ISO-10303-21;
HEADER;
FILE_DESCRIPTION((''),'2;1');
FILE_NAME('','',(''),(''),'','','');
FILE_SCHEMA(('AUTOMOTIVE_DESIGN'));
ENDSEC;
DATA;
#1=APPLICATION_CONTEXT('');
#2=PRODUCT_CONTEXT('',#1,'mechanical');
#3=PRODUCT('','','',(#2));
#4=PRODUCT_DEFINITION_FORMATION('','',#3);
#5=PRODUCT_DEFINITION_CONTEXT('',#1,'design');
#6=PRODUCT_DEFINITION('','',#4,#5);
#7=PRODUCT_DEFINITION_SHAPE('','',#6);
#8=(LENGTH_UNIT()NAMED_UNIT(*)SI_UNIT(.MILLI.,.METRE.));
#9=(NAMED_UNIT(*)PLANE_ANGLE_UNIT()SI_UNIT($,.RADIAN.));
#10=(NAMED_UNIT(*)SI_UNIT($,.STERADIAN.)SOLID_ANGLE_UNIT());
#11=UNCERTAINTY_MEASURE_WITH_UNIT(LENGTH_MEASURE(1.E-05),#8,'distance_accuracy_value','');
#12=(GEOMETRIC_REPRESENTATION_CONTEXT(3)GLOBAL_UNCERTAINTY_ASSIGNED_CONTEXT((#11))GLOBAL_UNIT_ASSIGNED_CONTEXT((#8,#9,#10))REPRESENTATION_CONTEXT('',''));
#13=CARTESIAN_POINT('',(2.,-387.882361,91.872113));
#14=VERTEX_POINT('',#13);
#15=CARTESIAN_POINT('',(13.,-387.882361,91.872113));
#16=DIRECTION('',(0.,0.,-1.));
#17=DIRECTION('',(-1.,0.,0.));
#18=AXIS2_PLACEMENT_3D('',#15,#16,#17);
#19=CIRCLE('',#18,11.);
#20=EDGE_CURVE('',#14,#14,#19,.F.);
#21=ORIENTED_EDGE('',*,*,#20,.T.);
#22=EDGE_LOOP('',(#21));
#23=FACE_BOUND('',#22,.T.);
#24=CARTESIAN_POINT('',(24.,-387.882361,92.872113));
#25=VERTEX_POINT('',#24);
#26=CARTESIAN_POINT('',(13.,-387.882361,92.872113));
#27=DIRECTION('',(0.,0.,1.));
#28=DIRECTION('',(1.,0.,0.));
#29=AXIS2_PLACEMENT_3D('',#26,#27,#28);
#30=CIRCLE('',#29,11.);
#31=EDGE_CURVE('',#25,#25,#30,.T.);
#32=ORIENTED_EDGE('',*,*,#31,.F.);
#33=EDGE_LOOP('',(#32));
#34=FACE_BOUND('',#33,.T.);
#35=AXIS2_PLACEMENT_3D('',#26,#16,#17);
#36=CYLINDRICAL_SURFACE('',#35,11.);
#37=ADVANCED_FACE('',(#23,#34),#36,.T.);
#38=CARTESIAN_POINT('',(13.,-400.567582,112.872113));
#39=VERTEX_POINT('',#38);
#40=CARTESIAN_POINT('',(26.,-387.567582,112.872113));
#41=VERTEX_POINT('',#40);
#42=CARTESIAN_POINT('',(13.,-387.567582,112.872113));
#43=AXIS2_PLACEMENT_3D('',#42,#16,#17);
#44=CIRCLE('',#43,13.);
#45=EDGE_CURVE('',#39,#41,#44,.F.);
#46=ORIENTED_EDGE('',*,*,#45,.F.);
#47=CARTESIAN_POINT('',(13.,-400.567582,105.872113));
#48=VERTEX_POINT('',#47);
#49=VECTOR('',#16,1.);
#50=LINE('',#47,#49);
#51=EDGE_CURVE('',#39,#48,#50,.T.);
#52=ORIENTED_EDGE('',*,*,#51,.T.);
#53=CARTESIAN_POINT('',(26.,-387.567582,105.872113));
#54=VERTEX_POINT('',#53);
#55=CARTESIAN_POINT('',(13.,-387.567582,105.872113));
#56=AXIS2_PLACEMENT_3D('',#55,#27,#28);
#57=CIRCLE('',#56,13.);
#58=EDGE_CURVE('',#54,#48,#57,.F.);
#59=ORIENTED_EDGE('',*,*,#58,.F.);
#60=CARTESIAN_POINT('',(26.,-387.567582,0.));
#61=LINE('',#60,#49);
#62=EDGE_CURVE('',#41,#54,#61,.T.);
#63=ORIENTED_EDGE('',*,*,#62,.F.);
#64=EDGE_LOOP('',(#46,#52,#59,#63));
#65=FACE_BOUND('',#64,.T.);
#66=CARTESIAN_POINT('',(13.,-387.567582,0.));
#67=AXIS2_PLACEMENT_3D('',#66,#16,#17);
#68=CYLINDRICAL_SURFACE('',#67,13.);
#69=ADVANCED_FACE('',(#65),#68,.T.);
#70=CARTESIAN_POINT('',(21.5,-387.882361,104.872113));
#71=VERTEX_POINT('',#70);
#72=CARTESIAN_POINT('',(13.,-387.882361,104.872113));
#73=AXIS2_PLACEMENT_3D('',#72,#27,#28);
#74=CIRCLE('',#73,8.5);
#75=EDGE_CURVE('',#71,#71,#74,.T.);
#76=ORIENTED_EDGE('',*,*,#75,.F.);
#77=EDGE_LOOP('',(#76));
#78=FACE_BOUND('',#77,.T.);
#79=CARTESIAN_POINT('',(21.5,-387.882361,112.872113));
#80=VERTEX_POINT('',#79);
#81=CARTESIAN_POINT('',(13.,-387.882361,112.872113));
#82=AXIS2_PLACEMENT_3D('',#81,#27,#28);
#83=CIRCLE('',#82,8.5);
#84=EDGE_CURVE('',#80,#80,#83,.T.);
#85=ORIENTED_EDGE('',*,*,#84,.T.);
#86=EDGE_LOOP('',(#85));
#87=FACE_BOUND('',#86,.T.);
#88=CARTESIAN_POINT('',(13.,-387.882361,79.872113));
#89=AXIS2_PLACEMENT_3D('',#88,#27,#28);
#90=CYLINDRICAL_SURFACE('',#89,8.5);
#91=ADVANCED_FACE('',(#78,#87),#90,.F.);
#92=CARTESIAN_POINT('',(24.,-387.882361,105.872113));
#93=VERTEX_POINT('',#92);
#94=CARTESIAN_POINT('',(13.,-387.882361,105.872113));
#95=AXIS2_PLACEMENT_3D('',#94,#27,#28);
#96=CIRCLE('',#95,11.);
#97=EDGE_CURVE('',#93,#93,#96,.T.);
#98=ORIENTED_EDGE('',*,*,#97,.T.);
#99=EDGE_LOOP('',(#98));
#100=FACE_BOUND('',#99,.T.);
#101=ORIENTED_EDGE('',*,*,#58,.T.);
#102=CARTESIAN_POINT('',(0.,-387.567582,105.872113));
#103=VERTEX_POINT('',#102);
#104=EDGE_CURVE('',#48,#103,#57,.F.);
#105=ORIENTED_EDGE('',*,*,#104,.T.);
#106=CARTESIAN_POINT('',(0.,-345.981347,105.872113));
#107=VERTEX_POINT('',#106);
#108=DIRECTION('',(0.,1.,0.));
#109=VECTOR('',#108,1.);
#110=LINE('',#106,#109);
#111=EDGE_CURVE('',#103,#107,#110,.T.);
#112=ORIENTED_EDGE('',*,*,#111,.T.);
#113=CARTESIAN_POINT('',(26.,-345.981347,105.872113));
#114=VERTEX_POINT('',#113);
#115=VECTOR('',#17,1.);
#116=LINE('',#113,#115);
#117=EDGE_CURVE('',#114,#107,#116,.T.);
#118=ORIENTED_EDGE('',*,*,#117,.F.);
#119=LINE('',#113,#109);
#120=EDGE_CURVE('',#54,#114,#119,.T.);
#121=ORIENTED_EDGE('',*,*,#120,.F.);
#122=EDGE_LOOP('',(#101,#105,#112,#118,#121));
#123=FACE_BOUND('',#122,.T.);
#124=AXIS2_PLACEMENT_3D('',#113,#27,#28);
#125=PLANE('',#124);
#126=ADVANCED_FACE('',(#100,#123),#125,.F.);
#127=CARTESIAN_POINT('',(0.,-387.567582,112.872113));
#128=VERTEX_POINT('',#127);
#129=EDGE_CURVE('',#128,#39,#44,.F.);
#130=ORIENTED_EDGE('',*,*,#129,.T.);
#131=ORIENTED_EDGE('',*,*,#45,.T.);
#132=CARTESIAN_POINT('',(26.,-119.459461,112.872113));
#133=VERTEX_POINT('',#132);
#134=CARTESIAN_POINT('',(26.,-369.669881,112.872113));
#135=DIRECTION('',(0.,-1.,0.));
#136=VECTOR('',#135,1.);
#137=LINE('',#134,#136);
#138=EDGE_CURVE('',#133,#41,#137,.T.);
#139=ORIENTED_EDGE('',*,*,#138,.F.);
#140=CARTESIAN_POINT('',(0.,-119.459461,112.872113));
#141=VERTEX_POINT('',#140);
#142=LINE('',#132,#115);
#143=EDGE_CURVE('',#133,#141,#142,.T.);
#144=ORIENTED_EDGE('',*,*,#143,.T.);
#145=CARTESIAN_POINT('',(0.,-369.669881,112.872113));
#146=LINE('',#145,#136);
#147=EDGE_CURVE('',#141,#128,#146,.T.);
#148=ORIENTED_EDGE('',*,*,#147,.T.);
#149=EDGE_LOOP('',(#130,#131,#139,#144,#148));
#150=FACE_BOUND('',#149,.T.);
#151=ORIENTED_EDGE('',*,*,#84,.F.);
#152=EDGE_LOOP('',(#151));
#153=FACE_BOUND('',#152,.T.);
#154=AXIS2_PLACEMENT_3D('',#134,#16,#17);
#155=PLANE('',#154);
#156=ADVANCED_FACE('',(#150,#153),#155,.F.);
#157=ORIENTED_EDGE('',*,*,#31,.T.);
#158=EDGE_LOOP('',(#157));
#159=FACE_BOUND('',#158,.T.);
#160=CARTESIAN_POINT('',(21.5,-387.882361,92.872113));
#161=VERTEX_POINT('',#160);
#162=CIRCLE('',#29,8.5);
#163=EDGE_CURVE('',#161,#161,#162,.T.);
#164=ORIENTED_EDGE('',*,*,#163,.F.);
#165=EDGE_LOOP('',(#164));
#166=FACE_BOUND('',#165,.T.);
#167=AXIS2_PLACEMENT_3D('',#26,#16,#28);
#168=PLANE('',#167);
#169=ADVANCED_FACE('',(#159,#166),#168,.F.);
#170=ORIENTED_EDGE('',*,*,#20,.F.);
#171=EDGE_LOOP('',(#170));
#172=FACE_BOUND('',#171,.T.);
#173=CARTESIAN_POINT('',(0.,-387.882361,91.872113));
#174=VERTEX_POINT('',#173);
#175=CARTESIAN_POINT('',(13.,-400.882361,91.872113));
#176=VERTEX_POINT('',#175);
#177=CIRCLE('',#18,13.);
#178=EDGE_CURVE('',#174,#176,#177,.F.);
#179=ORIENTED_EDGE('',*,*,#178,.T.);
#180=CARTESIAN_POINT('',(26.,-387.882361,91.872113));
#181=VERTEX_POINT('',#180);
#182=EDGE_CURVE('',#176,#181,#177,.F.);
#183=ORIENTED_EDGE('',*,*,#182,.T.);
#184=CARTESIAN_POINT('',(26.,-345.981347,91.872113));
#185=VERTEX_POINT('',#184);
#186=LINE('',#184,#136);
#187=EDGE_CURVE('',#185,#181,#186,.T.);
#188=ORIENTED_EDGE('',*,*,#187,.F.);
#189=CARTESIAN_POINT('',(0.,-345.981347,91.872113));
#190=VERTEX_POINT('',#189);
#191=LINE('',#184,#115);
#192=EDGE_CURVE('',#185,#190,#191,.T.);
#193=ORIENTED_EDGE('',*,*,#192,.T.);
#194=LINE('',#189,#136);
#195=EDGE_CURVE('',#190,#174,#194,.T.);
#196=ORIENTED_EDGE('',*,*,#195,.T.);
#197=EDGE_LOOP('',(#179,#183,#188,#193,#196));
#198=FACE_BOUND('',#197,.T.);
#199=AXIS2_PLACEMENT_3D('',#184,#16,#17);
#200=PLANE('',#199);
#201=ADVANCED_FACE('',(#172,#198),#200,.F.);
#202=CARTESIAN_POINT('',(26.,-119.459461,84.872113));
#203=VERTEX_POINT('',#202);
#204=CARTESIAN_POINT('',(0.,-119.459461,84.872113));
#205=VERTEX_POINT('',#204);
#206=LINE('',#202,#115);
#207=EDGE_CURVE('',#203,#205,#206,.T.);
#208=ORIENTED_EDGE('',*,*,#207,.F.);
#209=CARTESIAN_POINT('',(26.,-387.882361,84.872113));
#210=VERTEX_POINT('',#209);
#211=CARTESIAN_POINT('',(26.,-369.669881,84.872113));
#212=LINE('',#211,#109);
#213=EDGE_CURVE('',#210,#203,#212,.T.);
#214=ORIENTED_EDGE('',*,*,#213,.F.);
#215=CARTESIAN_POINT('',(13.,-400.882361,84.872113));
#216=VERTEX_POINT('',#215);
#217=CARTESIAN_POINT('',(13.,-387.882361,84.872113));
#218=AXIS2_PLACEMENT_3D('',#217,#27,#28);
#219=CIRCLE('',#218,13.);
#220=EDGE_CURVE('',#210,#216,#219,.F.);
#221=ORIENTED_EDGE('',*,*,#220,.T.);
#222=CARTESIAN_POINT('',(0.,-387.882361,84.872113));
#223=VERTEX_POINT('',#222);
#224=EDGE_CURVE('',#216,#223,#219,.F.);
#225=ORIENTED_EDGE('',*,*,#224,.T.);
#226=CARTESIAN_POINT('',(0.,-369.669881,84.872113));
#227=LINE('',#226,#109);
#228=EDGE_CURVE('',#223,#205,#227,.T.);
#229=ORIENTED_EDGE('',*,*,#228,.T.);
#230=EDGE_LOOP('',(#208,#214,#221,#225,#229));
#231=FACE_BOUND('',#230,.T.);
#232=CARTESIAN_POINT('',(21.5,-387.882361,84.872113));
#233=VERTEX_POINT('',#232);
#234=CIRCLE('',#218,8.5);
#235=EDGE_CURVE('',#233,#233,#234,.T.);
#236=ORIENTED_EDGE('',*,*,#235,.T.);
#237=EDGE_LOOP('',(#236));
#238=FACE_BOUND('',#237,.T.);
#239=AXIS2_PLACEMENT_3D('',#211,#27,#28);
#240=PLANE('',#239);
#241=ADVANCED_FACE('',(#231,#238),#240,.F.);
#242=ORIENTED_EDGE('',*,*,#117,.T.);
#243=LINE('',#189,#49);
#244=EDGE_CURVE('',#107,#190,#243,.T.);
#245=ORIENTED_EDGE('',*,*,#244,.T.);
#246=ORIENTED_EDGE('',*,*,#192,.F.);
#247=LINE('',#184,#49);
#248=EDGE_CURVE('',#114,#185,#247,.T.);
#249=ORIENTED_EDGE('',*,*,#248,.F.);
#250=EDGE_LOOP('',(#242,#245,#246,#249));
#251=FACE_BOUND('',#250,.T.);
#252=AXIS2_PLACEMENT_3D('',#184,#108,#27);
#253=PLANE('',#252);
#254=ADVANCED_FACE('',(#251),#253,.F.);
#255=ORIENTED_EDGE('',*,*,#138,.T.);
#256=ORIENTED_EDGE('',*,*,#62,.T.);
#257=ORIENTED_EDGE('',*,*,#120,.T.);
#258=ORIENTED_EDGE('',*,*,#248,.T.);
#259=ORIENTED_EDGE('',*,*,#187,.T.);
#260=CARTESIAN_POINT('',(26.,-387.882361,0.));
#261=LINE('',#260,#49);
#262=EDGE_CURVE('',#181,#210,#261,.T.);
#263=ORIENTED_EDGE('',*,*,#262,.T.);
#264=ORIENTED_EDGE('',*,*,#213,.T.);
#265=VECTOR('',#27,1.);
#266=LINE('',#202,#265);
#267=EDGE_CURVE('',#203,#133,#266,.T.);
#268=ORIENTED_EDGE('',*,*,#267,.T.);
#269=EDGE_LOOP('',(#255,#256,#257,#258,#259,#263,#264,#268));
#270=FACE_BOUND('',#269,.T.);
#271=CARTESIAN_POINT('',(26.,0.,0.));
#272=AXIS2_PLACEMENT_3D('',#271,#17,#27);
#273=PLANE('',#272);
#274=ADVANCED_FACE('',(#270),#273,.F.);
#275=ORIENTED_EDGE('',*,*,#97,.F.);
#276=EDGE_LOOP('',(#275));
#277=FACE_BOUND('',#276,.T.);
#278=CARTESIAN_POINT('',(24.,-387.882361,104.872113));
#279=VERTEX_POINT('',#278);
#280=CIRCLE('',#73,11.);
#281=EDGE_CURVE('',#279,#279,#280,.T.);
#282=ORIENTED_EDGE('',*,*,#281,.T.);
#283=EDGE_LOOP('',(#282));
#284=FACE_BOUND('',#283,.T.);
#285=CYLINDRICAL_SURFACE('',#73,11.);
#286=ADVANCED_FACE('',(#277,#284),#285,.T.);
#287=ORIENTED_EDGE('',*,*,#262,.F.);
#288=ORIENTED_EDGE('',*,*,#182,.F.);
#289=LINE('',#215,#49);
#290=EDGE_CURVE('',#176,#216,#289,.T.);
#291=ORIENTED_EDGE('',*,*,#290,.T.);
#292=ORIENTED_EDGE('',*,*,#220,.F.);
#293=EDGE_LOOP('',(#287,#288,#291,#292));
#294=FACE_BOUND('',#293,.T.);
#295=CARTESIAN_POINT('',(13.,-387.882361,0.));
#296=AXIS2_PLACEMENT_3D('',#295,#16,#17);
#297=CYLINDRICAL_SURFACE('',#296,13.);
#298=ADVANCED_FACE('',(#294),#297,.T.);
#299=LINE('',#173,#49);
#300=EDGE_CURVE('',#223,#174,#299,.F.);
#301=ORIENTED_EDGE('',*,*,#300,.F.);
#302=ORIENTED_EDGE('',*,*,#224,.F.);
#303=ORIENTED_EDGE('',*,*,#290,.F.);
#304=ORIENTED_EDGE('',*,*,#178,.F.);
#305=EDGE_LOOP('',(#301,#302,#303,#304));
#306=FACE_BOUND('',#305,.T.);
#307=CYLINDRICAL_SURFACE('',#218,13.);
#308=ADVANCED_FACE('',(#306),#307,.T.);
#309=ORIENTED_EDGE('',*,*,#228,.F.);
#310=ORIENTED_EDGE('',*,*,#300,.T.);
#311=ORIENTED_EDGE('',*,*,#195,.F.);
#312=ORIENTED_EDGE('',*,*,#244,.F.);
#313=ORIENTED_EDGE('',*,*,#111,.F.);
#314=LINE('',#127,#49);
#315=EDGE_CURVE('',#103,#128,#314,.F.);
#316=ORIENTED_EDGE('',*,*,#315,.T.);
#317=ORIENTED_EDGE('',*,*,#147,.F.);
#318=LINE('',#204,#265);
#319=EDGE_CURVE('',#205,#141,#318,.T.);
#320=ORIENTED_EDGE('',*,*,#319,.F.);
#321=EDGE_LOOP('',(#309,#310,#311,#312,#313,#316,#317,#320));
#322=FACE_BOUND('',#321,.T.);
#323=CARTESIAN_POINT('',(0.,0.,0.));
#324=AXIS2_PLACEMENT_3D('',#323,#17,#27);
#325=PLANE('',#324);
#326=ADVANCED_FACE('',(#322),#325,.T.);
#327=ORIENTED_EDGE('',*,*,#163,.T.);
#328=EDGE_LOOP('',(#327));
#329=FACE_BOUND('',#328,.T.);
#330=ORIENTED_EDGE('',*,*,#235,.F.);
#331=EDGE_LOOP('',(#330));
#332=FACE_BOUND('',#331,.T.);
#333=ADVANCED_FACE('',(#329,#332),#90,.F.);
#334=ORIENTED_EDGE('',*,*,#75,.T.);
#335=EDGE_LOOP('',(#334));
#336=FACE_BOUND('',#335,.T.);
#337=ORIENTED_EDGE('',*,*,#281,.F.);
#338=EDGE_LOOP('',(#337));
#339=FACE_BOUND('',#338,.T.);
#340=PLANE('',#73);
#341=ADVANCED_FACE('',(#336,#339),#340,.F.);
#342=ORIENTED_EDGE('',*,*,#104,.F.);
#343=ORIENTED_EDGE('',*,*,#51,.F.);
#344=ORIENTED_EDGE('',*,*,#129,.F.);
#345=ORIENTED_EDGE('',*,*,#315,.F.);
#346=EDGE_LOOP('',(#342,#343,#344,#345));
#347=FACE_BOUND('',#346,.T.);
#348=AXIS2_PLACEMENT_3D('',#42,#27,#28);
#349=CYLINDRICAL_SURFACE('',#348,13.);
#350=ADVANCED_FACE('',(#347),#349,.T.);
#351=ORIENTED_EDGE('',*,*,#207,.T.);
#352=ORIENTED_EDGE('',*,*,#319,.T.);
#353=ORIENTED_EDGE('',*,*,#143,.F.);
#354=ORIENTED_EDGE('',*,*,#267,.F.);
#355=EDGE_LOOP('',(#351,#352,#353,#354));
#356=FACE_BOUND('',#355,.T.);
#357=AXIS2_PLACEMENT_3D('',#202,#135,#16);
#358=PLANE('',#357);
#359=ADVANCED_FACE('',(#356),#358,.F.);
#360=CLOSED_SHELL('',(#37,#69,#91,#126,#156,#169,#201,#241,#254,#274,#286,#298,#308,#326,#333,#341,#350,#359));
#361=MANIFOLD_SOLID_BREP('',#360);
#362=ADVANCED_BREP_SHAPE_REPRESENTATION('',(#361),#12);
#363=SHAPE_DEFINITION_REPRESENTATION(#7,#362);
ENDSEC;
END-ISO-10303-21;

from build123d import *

# Parameters (mm, degrees)
BOSS_EXTRUDE1_DEPTH = 26
SKETCH4_R           = 8.5
CUT_EXTRUDE1_DEPTH  = 33
FILLET1_R           = 13
SKETCH5_R           = 11
SKETCH5_R_2         = 8.5
BOSS_EXTRUDE2_DEPTH = 8


with BuildPart() as part:
    # Sketch3 → Boss-Extrude1 (new body)
    with BuildSketch(Plane(origin=(0, 0, 0), x_dir=(0, 0, -1), z_dir=(1, 0, 0))):
        Polygon((-91.872113318, -345.981347093), (-105.872113318, -345.981347093), (-105.872113318, -400.567582276), (-112.872113318, -400.567582276), (-112.872113318, -369.669881287), (-112.872113318, -119.459461353), (-84.872113318, -119.459461353), (-84.872113318, -369.669881287), (-84.872113318, -400.882361345), (-91.872113318, -400.882361345), align=None)
    extrude(amount=BOSS_EXTRUDE1_DEPTH)

    # Sketch4 → Cut-Extrude1 (cut)
    with BuildSketch(Plane.XY.offset(112.872113318)):
        with Locations((13, -387.882361345)):
            Circle(SKETCH4_R)
    extrude(amount=-CUT_EXTRUDE1_DEPTH, mode=Mode.SUBTRACT)

    # Fillet1
    fillet1_edges = [part.edges().sort_by_distance(p)[0] for p in [
        (26, -400.567582276, 109.372113318),
        (26, -400.882361345, 88.372113318),
        (0, -400.567582276, 109.372113318),
        (0, -400.882361345, 88.372113318),
    ]]
    fillet(fillet1_edges, radius=FILLET1_R - 0.0001)  # a hair under: the kernel refuses the full size

    # Sketch5 → Boss-Extrude2 (add)
    with BuildSketch(Plane.XY.offset(112.872113318)):
        with Locations((13, -387.882361345)):
            Circle(SKETCH5_R)
        with Locations((13, -387.882361345)):
            Circle(SKETCH5_R_2, mode=Mode.SUBTRACT)
    boss_extrude2 = extrude(amount=-BOSS_EXTRUDE2_DEPTH)

    # Mirror1: Boss-Extrude2 across plane
    add(boss_extrude2.mirror(Plane.XY.offset(98.872113318)))


solid = part.part
